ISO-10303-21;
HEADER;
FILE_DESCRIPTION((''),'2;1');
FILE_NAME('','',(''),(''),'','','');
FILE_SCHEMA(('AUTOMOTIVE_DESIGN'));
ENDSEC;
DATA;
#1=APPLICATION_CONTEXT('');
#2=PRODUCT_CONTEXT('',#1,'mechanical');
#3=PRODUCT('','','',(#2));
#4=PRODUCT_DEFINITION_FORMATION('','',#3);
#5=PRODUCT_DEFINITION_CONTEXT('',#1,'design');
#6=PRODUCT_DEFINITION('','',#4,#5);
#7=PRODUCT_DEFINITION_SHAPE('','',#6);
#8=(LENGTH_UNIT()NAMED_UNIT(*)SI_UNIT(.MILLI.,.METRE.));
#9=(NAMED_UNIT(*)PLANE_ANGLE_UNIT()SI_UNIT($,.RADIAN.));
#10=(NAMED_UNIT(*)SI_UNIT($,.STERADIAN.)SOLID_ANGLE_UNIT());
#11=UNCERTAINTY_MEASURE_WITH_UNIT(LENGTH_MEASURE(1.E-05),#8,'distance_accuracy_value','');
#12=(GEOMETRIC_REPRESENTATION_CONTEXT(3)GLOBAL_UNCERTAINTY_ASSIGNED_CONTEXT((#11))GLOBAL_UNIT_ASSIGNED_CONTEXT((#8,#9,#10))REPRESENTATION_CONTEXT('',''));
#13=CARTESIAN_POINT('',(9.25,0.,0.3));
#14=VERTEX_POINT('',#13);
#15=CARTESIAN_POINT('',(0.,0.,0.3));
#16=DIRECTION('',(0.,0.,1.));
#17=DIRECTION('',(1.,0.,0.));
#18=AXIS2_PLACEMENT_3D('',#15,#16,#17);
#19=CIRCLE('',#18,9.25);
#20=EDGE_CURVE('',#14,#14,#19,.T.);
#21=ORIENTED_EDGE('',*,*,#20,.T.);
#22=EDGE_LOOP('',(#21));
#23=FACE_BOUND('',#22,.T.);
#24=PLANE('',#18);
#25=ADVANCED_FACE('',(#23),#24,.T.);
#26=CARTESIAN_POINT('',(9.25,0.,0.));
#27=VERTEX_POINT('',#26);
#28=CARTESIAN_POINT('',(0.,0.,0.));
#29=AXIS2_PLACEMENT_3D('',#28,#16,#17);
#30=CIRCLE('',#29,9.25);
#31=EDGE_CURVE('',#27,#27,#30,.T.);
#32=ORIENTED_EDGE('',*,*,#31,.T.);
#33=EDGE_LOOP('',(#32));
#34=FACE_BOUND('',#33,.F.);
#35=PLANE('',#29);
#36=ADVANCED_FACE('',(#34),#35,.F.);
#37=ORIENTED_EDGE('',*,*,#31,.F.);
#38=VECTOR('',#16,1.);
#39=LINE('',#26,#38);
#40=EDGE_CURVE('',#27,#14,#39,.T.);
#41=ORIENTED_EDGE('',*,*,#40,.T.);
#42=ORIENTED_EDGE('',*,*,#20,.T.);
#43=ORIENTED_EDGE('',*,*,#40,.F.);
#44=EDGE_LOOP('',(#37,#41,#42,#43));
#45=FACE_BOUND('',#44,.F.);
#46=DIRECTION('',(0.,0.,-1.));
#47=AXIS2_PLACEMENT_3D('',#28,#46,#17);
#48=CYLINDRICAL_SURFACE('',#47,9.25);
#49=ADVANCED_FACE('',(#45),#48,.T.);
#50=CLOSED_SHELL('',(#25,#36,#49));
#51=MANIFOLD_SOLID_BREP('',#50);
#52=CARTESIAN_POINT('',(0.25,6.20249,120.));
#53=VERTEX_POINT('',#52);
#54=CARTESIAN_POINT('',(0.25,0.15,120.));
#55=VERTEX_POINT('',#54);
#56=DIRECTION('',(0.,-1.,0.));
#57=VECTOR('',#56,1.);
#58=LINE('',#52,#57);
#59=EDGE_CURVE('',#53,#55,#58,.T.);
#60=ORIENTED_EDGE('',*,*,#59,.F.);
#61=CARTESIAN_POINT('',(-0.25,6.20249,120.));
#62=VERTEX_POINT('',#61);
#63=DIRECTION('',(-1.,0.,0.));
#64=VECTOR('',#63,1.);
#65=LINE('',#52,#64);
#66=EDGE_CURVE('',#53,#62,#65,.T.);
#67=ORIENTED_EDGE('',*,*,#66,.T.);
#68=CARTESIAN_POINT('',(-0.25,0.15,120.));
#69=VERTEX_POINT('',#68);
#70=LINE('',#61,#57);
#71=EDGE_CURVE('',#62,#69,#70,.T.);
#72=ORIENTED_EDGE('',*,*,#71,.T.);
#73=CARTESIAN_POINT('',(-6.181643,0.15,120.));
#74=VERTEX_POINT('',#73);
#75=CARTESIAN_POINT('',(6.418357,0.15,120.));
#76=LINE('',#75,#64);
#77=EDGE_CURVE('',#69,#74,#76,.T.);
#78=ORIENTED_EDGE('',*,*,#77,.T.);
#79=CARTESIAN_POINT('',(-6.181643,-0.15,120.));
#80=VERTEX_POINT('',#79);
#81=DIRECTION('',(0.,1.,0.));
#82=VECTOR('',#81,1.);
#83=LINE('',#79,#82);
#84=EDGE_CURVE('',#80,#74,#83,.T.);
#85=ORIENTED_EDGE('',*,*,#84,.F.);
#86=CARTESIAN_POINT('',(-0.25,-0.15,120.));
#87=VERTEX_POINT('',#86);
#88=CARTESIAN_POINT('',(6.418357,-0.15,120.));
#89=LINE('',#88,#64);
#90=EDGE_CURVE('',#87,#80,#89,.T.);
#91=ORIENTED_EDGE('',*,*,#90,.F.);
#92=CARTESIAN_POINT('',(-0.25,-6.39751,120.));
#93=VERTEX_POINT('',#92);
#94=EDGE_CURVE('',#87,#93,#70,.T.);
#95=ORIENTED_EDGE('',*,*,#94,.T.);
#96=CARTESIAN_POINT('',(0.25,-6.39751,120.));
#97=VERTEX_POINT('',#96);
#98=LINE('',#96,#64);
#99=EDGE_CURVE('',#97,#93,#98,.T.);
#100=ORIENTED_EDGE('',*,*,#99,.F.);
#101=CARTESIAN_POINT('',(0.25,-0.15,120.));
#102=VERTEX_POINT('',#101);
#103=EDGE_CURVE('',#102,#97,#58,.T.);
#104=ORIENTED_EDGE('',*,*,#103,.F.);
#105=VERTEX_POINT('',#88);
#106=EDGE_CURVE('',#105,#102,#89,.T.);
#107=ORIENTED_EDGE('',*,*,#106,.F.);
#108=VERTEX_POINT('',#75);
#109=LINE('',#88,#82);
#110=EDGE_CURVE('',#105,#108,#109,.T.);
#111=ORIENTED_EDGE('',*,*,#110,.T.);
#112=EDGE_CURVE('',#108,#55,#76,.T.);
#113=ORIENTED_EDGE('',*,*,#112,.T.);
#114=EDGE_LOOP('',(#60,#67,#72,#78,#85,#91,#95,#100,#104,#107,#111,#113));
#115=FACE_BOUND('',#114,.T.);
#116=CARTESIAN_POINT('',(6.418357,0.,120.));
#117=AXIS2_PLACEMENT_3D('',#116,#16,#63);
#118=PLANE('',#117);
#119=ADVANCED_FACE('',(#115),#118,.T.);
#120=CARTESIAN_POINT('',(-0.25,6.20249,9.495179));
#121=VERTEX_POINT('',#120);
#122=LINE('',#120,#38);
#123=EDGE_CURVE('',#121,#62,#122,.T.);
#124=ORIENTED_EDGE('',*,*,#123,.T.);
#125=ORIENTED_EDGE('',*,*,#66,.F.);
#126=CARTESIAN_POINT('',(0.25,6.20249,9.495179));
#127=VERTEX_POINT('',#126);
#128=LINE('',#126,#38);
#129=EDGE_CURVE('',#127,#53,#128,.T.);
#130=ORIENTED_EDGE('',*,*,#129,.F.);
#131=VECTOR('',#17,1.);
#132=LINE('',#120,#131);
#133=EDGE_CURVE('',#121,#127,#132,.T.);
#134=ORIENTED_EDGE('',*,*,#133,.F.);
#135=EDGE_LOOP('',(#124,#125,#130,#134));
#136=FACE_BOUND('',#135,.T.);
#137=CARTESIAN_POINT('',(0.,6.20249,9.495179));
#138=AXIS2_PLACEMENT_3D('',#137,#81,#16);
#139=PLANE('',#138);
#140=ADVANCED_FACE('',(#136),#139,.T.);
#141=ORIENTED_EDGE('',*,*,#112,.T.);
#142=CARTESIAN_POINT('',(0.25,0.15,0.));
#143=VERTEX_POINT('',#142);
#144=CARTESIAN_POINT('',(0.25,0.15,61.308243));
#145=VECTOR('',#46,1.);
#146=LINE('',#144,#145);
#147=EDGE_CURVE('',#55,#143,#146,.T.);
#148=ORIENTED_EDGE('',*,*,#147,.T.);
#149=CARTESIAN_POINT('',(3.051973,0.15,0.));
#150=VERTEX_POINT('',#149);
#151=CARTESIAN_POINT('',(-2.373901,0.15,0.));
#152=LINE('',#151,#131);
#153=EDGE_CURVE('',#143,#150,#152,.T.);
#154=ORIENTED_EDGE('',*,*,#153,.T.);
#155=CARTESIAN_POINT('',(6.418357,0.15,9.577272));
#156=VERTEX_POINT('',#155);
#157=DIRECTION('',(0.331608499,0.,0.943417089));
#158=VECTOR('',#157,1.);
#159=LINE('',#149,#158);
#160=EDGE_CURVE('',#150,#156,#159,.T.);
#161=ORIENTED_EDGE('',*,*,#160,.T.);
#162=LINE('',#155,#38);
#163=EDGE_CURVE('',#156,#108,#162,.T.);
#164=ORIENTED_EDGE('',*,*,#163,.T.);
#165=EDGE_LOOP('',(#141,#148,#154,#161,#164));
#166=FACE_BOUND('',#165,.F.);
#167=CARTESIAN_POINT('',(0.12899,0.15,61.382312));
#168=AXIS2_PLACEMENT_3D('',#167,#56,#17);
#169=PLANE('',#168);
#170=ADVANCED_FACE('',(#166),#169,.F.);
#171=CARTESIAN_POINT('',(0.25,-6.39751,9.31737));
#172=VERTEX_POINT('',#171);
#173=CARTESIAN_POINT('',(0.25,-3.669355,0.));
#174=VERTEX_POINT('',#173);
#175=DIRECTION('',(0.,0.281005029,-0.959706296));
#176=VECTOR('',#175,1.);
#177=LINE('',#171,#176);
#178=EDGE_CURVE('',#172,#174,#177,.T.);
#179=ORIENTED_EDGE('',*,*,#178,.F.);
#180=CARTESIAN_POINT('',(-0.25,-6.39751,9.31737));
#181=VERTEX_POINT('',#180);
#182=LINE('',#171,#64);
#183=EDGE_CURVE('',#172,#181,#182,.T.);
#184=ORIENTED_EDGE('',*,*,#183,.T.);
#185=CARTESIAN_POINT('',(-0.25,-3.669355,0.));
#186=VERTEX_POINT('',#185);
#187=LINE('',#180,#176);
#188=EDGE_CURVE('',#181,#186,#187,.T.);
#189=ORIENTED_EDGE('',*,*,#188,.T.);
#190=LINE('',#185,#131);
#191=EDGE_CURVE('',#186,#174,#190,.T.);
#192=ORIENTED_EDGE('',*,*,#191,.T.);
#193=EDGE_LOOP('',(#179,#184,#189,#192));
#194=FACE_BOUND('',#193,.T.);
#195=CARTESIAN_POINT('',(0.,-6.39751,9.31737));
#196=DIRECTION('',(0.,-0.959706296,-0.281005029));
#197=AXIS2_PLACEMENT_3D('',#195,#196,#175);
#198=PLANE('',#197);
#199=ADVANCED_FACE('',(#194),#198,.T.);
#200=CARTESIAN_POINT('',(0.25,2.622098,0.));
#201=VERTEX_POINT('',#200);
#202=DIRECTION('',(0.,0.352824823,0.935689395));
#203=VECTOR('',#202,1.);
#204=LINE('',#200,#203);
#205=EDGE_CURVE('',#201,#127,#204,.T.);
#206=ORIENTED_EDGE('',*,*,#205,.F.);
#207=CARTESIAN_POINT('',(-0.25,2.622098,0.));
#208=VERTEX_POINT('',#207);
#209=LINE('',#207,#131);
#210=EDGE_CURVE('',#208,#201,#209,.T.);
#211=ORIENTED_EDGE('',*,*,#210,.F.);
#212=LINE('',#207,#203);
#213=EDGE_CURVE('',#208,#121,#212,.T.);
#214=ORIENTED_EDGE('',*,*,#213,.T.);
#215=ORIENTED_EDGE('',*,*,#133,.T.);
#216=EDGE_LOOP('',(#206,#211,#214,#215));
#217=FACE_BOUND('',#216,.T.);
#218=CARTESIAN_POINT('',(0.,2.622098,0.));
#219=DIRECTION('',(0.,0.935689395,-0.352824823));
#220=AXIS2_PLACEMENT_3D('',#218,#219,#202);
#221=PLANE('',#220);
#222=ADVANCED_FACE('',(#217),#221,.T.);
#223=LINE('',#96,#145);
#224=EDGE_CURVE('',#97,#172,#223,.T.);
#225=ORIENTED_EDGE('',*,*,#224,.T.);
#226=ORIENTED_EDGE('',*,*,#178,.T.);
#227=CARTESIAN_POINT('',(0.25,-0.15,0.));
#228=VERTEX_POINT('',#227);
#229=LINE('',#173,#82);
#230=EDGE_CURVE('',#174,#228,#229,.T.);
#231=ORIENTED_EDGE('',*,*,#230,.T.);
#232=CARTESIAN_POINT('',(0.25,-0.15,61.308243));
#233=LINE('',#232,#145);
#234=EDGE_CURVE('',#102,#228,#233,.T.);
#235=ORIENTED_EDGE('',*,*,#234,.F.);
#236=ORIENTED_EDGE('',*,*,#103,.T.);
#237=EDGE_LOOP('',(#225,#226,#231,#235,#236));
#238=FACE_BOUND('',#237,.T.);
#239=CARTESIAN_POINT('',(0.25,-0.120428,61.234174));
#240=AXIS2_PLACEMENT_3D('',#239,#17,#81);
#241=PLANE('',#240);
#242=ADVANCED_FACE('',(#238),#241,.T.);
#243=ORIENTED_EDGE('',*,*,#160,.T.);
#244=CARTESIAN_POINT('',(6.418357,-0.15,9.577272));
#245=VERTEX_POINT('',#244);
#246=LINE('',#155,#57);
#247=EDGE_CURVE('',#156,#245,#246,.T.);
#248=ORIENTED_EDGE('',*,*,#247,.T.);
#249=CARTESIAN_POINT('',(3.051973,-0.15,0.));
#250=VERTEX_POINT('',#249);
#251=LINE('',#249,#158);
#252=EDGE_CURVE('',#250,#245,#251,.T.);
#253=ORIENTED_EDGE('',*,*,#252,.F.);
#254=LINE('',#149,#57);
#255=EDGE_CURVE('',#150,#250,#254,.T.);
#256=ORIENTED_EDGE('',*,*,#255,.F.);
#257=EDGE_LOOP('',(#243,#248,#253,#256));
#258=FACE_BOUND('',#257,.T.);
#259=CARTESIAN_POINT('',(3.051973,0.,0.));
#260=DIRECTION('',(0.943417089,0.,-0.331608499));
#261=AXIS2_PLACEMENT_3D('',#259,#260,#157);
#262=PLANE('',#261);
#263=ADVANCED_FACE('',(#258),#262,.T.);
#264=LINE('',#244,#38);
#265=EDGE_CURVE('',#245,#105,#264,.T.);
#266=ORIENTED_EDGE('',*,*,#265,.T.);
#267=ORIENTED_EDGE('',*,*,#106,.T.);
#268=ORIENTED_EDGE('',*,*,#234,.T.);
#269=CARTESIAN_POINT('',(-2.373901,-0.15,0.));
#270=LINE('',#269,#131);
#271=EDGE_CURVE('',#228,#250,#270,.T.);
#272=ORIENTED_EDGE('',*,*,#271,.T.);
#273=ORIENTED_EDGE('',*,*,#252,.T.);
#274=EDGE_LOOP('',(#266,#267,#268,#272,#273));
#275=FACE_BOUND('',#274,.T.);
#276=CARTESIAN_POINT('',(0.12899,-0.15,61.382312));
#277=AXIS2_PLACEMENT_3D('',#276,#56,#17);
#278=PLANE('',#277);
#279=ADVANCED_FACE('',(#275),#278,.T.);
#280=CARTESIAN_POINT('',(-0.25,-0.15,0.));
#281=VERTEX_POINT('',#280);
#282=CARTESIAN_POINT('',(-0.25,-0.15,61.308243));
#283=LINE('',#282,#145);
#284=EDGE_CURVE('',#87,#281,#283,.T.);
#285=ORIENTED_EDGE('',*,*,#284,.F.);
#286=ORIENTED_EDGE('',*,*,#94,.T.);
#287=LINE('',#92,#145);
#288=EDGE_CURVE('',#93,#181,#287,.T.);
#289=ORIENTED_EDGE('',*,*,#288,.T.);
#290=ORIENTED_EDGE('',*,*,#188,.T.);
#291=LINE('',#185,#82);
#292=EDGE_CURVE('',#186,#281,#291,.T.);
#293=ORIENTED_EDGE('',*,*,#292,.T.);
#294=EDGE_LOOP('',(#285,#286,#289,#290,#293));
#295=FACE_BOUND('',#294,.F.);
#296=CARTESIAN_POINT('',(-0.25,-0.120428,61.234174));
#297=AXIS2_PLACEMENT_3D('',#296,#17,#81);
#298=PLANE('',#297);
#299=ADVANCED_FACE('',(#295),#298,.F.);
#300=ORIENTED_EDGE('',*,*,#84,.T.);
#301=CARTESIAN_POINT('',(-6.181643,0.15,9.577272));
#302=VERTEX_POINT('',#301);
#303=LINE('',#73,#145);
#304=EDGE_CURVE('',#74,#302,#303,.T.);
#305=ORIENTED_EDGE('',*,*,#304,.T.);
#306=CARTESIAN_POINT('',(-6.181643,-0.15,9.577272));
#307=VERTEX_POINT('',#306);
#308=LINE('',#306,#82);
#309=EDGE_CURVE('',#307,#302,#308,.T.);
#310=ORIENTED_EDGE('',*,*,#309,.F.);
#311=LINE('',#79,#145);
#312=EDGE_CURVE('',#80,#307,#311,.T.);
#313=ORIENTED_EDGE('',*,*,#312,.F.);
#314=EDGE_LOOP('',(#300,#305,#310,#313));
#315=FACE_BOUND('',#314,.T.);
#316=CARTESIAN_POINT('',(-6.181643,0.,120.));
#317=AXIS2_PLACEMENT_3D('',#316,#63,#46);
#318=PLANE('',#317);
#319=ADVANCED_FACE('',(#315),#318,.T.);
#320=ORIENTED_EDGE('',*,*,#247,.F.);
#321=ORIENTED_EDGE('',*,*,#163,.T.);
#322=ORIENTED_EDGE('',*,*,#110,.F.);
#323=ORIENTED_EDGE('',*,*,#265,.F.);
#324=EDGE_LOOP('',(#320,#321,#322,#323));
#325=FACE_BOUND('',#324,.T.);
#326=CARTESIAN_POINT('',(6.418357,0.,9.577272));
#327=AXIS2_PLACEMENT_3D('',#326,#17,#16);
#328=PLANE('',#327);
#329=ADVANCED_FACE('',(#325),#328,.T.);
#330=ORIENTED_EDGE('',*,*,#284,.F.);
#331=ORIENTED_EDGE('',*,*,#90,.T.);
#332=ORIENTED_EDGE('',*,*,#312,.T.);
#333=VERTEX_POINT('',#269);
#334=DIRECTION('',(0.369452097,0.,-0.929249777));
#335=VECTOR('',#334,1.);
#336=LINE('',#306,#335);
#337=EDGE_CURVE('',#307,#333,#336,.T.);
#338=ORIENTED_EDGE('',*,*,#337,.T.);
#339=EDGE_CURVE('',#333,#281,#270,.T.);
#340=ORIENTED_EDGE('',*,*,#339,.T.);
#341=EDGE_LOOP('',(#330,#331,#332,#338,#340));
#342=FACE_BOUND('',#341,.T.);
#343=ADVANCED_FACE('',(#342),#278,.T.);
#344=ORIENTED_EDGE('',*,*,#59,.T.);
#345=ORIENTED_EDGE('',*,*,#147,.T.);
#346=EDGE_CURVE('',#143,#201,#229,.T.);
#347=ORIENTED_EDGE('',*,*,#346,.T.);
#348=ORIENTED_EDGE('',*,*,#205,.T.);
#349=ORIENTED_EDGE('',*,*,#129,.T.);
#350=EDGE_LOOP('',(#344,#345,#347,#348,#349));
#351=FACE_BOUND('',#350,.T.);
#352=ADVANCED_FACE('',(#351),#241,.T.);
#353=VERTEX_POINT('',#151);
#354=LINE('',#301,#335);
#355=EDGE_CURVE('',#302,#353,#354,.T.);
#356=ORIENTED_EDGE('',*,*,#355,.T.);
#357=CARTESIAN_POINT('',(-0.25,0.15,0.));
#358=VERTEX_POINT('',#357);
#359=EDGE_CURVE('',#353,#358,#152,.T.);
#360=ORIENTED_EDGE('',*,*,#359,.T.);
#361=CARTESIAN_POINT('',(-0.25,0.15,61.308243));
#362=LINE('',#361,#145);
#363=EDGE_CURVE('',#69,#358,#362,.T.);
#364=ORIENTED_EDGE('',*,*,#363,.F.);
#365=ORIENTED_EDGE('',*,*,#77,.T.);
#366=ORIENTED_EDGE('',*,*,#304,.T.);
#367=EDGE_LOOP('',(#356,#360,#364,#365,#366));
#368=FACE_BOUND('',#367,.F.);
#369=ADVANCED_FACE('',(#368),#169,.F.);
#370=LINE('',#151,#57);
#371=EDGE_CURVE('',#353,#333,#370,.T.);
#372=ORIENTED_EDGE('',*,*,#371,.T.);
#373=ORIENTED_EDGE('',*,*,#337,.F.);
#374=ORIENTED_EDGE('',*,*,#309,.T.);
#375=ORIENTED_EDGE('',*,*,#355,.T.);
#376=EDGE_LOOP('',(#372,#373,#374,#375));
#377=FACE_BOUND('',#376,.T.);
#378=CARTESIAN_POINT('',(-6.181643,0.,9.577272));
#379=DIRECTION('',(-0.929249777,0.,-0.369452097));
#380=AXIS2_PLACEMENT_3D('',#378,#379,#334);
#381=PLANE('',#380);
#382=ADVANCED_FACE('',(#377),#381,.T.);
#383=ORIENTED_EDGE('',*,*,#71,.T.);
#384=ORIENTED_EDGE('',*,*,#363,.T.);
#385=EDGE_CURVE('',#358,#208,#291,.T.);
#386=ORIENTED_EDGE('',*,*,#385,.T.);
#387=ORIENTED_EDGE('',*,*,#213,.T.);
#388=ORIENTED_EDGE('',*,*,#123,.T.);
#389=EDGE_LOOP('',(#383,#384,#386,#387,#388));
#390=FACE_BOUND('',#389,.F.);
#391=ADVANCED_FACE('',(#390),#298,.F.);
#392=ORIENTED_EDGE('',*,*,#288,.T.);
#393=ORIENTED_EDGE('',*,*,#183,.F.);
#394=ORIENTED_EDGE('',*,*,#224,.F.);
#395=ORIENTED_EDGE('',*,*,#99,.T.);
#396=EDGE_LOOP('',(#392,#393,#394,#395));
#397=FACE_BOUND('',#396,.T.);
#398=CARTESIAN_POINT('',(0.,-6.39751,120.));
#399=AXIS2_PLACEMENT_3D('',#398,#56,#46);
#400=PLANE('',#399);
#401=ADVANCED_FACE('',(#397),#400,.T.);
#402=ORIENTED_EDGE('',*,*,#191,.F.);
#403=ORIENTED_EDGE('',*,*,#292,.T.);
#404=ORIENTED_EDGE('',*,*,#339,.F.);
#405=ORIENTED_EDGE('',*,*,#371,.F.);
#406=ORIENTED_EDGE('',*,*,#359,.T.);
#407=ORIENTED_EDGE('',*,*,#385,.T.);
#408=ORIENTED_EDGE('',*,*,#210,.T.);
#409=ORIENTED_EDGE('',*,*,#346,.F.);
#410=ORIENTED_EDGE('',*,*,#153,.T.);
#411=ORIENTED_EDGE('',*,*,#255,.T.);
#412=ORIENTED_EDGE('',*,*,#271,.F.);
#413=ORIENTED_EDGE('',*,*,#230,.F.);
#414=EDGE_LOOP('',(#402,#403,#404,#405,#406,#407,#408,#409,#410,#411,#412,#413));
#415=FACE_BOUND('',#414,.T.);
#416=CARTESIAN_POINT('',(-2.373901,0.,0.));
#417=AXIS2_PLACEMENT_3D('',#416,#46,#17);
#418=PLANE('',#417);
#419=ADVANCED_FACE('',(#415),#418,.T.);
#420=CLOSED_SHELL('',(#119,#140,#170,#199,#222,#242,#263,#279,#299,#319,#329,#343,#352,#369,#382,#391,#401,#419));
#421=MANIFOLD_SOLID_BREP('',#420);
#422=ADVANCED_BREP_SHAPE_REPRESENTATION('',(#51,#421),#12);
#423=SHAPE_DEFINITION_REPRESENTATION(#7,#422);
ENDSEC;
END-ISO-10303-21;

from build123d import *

# Parameters (mm, degrees)
F0_R     = 9.25
F3_DEPTH = 0.3
F4_DEPTH = 0.25
F5_DEPTH = 0.15


with BuildPart() as f3:
    # F0 (on Top) → F3 (new body)
    with BuildSketch(Plane.XY):
        Circle(F0_R)
    extrude(amount=F3_DEPTH)


with BuildPart() as f4:
    # F1 (on Right) → F4 (new body, symmetric)
    with BuildSketch(Plane.YZ):
        Polygon((-6.3975099474, 9.3173701316), (-3.669354599, 0), (2.6220979635, 0), (6.2024900526, 9.4951791689), (6.2024900526, 120), (-6.3975099474, 120), align=None)
    extrude(amount=F4_DEPTH, both=True)

    # F2 (on Front) → F5 (join, symmetric)
    with BuildSketch(Plane.XZ):
        Polygon((-6.1816425862, 9.5772715285), (-2.373900963, 0), (3.051972948, 0), (6.4183574138, 9.5772715285), (6.4183574138, 120), (-6.1816425862, 120), align=None)
    extrude(amount=F5_DEPTH, both=True)


solid = Compound([f3.part, f4.part])
